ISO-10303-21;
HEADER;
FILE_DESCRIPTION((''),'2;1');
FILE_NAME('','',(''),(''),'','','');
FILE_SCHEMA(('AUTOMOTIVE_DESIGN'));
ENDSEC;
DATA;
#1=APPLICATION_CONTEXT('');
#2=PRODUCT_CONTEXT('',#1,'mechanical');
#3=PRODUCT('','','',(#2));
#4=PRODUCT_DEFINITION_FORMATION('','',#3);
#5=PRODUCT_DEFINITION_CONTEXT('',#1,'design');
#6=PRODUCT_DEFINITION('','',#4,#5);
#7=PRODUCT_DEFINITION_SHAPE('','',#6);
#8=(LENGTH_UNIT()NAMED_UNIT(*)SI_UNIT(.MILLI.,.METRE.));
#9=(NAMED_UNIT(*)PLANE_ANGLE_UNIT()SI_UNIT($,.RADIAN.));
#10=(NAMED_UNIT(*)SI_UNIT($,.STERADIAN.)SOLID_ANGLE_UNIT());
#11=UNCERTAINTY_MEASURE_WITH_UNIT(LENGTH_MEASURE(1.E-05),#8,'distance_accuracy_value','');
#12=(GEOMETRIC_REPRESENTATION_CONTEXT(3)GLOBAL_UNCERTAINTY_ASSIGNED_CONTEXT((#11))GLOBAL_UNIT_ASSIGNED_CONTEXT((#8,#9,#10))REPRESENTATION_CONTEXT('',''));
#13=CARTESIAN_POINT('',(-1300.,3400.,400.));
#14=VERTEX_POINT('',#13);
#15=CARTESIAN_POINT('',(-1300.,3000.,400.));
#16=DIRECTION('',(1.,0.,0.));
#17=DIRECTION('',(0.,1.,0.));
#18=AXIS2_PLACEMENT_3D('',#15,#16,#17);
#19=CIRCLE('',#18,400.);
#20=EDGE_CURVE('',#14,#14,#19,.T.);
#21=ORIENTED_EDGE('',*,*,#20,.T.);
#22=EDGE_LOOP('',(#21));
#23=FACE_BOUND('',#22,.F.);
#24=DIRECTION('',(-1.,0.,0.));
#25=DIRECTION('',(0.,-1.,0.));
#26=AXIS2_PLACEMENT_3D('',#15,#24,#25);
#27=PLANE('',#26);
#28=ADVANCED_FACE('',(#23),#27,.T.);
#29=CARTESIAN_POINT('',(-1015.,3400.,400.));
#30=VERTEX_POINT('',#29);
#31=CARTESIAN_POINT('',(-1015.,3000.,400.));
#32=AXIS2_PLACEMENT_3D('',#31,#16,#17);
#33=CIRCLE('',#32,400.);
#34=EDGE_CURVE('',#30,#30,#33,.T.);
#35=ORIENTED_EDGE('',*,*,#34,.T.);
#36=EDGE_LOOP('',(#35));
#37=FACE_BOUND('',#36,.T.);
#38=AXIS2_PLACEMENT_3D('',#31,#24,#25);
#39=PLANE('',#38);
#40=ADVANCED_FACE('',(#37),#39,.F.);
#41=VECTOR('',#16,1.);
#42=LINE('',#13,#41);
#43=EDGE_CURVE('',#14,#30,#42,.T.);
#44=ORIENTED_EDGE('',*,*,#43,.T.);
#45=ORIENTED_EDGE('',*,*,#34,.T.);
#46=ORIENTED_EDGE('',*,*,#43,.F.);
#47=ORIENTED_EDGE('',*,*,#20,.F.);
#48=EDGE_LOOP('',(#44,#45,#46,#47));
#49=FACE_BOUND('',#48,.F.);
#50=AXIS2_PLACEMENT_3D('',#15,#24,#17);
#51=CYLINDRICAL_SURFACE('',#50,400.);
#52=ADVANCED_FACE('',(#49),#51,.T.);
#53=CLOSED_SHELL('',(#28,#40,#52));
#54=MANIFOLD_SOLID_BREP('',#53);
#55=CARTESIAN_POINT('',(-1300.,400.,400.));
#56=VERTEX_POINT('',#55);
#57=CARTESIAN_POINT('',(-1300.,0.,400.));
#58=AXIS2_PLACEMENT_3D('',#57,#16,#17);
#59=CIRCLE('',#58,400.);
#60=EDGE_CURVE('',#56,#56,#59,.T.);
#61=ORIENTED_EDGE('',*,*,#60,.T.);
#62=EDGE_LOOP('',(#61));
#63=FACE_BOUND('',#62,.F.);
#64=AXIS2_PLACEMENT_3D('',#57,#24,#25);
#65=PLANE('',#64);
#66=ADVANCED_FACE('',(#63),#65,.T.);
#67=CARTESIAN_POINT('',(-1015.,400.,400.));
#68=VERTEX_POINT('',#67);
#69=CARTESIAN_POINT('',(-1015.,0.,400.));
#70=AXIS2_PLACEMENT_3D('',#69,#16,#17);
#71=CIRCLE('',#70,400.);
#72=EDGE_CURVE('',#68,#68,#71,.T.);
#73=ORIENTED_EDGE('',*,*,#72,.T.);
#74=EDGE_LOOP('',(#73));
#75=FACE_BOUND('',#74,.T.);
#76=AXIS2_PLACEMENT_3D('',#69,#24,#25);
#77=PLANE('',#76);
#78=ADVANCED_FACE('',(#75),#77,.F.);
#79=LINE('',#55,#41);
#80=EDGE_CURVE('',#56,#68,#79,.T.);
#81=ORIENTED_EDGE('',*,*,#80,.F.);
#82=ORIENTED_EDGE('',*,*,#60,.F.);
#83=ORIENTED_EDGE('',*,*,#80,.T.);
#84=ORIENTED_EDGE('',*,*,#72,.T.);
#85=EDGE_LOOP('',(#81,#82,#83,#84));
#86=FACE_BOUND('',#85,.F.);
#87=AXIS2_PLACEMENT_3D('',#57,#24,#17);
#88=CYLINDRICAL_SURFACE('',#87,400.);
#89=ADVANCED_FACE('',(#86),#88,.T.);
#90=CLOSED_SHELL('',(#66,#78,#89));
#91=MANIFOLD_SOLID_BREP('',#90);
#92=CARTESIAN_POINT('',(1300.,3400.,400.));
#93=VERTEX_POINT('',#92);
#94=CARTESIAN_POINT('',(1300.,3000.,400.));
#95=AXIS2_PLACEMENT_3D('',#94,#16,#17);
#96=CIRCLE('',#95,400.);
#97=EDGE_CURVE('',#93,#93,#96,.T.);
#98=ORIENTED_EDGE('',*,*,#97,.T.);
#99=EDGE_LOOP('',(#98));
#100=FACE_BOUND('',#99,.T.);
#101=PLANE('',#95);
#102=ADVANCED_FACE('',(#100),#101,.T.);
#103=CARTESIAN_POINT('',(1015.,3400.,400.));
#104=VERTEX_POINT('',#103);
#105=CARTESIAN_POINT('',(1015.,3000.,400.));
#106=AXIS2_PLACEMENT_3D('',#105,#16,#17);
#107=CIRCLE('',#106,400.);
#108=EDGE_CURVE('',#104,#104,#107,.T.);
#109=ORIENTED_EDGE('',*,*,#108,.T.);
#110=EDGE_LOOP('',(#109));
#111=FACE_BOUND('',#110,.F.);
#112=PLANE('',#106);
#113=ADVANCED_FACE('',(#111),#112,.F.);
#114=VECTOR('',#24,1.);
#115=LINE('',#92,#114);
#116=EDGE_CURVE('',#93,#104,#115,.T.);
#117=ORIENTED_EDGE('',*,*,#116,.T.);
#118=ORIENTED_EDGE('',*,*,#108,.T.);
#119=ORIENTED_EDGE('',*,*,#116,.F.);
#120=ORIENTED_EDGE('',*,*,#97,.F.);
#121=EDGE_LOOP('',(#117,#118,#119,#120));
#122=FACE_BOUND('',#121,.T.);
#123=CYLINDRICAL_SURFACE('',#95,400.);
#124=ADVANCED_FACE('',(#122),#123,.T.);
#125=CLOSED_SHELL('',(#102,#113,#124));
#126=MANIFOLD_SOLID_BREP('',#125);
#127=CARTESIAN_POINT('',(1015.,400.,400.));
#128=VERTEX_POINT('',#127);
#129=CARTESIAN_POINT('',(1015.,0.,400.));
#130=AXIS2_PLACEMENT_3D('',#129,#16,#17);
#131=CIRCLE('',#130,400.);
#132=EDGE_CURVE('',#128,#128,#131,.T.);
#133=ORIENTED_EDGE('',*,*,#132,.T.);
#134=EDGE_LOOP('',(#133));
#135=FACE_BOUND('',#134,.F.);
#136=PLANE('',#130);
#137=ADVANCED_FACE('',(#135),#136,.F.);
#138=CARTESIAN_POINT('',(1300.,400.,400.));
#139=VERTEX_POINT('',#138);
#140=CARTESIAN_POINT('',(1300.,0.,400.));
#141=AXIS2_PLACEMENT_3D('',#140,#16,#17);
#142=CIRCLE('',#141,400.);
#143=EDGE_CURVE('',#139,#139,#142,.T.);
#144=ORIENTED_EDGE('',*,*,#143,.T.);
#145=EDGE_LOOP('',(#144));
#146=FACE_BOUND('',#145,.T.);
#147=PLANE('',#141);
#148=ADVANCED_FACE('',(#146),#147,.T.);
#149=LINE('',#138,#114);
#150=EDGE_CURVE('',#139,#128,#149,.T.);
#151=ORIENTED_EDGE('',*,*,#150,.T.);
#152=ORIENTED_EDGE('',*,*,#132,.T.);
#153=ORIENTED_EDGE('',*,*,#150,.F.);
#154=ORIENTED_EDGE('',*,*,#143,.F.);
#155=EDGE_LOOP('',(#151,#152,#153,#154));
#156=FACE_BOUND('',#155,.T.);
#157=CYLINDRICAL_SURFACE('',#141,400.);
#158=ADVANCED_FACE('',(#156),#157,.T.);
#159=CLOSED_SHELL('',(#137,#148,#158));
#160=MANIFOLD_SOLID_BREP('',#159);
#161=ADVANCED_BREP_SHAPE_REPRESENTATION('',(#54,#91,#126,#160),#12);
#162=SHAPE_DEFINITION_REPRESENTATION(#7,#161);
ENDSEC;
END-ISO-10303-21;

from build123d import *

# Parameters (mm, degrees)
F2_R     = 400
F3_DEPTH = 285


# Not quite as in the source:
# - a pattern or mirror of a feature is missing from the dataset's text; its kind, count and spacing are read off the source's solid


with BuildPart() as f3:
    # F2 (on offset) → F3 (new body)
    with BuildSketch(Plane.YZ.offset(1300)):
        with Locations((0, 400)):
            Circle(F2_R)
    extrude(amount=-F3_DEPTH)


with BuildPart() as f3b:
    # F2 (on offset) → F3, piece 2 (new body)
    with BuildSketch(Plane.YZ.offset(1300)):
        with Locations((3000, 400)):
            Circle(F2_R)
    extrude(amount=-F3_DEPTH)


with BuildPart() as f3_copies_1:
    # F3_copies: instance of F3
    add(f3.part.mirror(Plane(origin=(0, 0, 0), x_dir=(0, 0, -1), z_dir=(-1, 0, 0))))


with BuildPart() as f3_2_copies_1:
    # F3_2_copies: instance of F3b
    add(f3b.part.mirror(Plane(origin=(0, 0, 0), x_dir=(0, 0, -1), z_dir=(-1, 0, 0))))


solid = Compound([f3.part, f3b.part, f3_copies_1.part, f3_2_copies_1.part])
